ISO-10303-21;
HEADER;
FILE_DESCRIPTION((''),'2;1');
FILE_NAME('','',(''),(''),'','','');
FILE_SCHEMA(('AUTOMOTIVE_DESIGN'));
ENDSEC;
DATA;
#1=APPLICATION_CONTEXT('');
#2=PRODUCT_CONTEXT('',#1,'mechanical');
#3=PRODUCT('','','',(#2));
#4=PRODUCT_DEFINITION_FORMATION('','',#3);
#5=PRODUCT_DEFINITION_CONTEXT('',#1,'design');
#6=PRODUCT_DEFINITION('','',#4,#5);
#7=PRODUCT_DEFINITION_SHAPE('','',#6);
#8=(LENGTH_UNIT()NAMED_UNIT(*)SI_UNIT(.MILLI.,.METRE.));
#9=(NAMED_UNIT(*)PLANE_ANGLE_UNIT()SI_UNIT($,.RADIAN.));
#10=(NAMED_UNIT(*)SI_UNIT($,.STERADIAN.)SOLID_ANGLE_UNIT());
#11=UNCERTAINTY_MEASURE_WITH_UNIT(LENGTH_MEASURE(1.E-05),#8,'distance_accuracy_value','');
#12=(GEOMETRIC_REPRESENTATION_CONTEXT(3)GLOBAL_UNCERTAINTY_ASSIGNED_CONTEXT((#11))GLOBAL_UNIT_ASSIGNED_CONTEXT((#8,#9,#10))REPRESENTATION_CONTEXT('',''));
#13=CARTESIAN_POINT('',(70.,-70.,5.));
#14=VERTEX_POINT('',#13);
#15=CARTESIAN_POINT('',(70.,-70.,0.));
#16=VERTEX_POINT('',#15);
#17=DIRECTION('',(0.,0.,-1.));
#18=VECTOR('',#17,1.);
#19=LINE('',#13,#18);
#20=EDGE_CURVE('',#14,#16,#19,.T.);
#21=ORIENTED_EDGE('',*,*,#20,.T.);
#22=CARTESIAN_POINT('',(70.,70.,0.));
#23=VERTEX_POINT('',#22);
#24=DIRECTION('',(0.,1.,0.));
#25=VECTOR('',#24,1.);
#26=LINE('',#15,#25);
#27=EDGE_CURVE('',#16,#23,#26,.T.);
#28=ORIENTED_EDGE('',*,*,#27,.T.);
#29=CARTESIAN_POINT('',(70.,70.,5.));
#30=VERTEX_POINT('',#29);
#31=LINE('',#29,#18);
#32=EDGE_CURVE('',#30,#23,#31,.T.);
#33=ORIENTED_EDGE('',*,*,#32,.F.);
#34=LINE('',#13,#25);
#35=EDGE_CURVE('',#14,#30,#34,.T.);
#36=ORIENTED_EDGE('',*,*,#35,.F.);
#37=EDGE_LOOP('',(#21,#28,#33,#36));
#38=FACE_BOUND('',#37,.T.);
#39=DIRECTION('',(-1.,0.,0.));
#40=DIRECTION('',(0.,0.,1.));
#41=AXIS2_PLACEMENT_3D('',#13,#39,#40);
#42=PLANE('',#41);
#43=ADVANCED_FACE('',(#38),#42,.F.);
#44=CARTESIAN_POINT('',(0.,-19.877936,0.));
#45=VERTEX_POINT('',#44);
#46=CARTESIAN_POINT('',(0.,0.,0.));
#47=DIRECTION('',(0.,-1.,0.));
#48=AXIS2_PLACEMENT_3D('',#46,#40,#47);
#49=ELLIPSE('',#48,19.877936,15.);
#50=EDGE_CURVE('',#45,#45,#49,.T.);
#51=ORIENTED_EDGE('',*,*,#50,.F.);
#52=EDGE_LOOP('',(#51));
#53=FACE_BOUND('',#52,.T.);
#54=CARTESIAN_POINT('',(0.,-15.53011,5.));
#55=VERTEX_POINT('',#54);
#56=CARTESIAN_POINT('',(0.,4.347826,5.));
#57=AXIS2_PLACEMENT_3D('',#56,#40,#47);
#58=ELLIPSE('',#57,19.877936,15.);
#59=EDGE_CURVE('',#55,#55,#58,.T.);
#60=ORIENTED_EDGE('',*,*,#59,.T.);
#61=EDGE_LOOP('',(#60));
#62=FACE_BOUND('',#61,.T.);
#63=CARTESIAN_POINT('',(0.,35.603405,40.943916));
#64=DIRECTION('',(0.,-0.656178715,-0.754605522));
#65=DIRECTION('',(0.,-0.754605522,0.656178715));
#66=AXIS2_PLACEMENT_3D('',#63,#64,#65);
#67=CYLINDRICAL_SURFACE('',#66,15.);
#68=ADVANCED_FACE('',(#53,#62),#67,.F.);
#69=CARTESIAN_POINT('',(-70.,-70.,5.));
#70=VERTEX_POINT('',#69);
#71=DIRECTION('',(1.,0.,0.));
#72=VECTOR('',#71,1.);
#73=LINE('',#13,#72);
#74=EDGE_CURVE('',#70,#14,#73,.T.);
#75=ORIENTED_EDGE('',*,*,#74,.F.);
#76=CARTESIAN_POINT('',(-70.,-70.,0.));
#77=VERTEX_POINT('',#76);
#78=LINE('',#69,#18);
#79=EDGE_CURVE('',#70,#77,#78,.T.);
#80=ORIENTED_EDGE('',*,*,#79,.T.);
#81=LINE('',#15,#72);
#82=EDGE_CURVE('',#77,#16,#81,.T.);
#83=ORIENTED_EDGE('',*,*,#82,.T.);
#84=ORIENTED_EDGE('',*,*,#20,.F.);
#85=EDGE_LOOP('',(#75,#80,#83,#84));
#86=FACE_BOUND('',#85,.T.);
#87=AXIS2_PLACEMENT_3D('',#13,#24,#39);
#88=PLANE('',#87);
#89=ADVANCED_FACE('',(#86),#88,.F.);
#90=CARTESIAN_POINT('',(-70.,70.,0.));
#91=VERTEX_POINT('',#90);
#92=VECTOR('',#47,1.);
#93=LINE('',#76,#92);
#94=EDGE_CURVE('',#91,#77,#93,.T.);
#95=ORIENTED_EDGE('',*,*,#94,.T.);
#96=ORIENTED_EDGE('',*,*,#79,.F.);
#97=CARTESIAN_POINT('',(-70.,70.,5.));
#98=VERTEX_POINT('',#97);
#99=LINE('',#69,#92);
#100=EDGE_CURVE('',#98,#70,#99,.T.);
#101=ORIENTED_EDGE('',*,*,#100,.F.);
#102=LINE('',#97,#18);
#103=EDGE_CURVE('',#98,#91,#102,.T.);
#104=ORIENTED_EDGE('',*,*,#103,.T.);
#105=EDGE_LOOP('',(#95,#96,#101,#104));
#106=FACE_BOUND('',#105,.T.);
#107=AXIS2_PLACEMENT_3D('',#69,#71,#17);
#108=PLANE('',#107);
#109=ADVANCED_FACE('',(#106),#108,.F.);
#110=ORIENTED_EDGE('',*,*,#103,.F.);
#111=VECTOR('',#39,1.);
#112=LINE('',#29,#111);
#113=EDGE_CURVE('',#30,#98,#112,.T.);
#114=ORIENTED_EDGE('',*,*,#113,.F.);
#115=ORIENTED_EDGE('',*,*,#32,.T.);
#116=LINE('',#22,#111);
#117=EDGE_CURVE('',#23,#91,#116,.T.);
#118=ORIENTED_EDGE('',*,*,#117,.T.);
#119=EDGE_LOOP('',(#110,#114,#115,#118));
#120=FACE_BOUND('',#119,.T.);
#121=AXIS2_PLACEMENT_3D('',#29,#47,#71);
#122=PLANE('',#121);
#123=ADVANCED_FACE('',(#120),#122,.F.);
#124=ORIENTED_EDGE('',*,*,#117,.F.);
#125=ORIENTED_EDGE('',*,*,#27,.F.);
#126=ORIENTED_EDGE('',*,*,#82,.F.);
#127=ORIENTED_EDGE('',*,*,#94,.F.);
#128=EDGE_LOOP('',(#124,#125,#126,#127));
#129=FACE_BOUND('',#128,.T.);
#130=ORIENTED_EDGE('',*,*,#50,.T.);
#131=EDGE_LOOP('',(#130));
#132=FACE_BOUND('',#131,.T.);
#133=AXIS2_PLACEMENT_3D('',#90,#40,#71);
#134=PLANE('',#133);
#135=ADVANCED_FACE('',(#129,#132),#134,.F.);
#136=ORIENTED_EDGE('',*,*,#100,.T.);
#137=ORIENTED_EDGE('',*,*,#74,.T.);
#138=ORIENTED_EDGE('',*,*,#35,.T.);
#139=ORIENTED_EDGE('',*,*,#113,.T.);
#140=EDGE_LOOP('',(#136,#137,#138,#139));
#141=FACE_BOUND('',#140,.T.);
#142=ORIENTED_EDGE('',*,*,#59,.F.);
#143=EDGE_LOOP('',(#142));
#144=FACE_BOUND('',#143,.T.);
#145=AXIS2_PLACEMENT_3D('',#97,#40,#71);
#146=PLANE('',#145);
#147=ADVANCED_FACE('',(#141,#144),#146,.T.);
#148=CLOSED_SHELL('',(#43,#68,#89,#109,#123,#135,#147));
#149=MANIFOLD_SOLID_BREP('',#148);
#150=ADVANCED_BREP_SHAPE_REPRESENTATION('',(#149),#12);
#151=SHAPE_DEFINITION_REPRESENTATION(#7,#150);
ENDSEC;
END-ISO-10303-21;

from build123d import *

# Parameters (mm, degrees)
SKETCH1_W           = 140
SKETCH1_H           = 140
BOSS_EXTRUDE1_DEPTH = 5
CAVITY1_START       = -13.043478361
CAVITY1_OUTLINE_R   = 15
CAVITY1_DEPTH       = 32.712935267


# Read off the part's stored shape, not the designer's step: Cavity1
with BuildPart() as part:
    # Sketch1 → Boss-Extrude1 (new body)
    with BuildSketch(Plane.XY):
        Rectangle(SKETCH1_W, SKETCH1_H)
    extrude(amount=BOSS_EXTRUDE1_DEPTH)

    # Cavity1 outline → Cavity1 (cut)
    with BuildSketch(Plane(origin=(0, 0, 0), x_dir=(1, 0, 0), z_dir=(0, 0.6561787149247867, 0.7546055221635047)).offset(CAVITY1_START)):
        Circle(CAVITY1_OUTLINE_R)
    extrude(amount=CAVITY1_DEPTH, mode=Mode.SUBTRACT)


solid = part.part
